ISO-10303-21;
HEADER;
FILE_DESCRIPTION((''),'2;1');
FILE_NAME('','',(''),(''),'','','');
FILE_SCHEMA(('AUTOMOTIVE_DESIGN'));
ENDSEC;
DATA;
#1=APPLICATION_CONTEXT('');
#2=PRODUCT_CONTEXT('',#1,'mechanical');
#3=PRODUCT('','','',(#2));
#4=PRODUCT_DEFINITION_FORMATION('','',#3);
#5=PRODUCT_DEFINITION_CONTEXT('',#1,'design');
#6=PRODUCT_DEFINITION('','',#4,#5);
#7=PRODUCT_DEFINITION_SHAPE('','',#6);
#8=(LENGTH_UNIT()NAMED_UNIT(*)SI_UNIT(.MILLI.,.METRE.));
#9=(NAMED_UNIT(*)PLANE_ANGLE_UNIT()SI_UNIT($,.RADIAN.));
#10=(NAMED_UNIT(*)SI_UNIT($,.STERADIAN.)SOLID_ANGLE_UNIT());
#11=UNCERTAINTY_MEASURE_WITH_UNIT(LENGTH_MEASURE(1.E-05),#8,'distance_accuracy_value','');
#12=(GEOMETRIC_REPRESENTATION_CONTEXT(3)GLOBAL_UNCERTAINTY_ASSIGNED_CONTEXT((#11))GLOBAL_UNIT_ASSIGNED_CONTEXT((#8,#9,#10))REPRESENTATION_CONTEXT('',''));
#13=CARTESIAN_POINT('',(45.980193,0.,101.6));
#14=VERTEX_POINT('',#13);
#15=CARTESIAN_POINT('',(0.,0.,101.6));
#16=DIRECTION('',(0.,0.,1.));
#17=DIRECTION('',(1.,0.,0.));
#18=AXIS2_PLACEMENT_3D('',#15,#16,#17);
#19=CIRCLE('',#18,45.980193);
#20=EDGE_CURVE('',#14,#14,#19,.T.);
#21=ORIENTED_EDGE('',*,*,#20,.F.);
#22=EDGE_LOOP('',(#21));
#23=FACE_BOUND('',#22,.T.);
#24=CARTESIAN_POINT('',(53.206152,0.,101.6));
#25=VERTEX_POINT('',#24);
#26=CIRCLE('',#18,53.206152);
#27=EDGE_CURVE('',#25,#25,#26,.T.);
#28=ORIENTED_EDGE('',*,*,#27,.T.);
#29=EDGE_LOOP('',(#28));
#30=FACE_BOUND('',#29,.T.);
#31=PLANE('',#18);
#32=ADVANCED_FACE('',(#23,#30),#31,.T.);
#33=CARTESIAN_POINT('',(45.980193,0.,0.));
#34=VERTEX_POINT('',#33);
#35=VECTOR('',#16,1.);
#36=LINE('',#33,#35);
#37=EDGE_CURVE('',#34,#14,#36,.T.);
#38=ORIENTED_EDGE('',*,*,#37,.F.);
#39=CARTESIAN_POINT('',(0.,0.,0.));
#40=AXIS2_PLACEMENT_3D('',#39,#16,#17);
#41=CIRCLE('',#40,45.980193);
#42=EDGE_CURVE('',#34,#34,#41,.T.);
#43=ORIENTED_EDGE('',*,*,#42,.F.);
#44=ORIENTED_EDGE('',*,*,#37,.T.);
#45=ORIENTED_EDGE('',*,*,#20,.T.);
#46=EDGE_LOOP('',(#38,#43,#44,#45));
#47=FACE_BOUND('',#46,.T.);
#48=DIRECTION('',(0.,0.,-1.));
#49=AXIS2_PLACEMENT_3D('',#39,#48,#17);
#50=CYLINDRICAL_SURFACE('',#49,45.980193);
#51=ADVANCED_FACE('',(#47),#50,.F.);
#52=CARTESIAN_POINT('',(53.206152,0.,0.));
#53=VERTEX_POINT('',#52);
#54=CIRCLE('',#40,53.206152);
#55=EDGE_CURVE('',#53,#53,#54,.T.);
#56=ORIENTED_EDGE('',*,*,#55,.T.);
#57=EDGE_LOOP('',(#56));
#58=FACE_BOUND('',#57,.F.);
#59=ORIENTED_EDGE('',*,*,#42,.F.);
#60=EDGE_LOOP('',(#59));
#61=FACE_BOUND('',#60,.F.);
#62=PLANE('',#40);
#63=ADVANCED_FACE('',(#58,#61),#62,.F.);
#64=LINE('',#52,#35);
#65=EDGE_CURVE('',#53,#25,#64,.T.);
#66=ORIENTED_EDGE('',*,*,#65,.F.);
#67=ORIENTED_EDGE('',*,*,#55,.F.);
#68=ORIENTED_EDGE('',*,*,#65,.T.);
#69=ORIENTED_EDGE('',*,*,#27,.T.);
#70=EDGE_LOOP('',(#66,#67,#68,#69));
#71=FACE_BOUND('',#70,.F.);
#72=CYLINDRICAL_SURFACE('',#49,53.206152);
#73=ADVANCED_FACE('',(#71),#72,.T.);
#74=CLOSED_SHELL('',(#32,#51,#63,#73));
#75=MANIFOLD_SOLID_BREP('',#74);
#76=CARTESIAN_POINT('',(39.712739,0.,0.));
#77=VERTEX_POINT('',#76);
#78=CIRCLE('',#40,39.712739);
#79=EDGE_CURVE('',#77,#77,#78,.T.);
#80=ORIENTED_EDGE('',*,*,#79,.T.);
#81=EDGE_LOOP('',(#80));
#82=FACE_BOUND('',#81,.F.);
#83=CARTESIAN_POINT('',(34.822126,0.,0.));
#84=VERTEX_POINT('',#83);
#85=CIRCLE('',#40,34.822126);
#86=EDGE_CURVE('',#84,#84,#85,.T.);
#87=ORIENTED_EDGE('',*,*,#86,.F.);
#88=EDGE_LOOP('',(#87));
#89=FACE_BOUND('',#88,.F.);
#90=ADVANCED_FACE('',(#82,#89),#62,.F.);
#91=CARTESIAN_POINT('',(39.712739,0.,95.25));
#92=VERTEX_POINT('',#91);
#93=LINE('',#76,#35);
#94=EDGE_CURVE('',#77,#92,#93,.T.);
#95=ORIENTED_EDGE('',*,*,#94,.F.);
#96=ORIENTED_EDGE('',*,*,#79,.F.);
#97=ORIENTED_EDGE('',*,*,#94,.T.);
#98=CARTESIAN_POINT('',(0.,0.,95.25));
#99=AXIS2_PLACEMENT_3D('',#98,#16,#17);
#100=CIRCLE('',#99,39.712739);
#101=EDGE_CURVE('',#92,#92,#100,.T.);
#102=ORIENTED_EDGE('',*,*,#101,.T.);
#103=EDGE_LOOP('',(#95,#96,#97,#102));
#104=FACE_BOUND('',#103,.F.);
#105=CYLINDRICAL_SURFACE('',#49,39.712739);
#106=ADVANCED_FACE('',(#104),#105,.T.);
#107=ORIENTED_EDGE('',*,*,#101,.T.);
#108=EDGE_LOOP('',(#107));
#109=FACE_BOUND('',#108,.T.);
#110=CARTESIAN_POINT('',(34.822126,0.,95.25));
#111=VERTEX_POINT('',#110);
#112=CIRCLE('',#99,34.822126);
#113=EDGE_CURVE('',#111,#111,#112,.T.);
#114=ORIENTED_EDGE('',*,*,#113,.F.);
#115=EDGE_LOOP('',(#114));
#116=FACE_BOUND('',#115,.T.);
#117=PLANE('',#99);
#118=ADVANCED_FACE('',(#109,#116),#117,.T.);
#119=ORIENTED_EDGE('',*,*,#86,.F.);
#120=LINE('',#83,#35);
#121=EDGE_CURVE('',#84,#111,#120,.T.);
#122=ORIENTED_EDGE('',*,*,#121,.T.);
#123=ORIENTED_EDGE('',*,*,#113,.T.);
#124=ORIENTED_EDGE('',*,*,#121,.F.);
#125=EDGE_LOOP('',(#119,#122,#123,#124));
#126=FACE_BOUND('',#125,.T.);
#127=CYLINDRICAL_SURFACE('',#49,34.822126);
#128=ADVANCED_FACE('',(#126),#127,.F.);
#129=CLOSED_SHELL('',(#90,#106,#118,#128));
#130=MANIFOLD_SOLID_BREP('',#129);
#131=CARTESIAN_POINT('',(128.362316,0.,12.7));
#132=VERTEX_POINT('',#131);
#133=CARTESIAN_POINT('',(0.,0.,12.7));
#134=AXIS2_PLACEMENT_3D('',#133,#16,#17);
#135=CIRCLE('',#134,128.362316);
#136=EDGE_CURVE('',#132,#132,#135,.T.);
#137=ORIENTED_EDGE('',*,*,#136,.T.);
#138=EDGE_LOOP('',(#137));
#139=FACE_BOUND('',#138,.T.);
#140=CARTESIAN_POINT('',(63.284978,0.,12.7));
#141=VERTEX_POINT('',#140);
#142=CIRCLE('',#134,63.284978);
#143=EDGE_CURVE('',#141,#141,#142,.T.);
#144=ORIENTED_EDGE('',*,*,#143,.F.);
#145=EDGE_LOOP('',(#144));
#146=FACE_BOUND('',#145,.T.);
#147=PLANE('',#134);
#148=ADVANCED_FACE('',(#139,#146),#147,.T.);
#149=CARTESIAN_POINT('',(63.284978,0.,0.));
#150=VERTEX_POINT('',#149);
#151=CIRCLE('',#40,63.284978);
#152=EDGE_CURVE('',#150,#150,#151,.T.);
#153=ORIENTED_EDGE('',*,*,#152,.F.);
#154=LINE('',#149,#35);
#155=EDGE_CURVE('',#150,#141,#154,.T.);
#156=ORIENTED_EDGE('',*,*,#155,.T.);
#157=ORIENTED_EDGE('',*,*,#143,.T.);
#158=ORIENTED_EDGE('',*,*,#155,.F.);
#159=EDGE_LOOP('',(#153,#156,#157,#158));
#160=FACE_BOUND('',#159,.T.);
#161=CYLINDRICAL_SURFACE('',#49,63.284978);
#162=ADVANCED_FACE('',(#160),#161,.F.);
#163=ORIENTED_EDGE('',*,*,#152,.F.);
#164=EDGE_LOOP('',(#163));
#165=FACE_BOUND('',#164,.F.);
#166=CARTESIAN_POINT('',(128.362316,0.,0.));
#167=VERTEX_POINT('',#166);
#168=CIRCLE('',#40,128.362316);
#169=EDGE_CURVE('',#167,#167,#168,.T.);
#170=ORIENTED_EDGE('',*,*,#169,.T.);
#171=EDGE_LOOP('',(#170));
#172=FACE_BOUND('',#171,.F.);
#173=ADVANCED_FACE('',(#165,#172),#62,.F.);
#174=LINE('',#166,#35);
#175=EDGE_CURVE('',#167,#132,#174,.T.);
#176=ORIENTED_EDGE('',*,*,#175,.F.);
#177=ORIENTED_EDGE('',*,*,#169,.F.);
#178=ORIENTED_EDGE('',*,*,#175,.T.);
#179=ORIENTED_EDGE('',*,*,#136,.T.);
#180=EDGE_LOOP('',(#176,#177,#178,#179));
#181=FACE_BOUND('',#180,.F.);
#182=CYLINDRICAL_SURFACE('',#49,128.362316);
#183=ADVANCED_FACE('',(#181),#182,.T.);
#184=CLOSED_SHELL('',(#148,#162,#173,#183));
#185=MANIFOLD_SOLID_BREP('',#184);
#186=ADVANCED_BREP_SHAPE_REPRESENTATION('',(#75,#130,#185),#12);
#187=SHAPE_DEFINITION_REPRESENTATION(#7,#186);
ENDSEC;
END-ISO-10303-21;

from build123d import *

# Parameters (mm, degrees)
F0_R     = 53.2061517891
F0_R_2   = 45.9801933219
F1_DEPTH = 101.6
F3_R     = 39.7127386475
F3_R_2   = 34.8221258387
F4_DEPTH = 95.25
F5_R     = 128.3623160329
F5_R_2   = 63.2849782705
F6_DEPTH = 12.7


# Not quite as in the source:
# - the program builds the solid bodies; features that only make, move or delete a surface that nothing else refers to are left out


with BuildPart() as f1:
    # F0 (on Top) → F1 (new body)
    with BuildSketch(Plane.XY):
        Circle(F0_R)
        Circle(F0_R_2, mode=Mode.SUBTRACT)
    extrude(amount=F1_DEPTH)


with BuildPart() as f4:
    # F3 (on Top) → F4 (new body)
    with BuildSketch(Plane.XY):
        Circle(F3_R)
        Circle(F3_R_2, mode=Mode.SUBTRACT)
    extrude(amount=F4_DEPTH)


with BuildPart() as f6:
    # F5 (on Top) → F6 (new body)
    with BuildSketch(Plane.XY):
        Circle(F5_R)
        Circle(F5_R_2, mode=Mode.SUBTRACT)
    extrude(amount=F6_DEPTH)


solid = Compound([f1.part, f4.part, f6.part])
